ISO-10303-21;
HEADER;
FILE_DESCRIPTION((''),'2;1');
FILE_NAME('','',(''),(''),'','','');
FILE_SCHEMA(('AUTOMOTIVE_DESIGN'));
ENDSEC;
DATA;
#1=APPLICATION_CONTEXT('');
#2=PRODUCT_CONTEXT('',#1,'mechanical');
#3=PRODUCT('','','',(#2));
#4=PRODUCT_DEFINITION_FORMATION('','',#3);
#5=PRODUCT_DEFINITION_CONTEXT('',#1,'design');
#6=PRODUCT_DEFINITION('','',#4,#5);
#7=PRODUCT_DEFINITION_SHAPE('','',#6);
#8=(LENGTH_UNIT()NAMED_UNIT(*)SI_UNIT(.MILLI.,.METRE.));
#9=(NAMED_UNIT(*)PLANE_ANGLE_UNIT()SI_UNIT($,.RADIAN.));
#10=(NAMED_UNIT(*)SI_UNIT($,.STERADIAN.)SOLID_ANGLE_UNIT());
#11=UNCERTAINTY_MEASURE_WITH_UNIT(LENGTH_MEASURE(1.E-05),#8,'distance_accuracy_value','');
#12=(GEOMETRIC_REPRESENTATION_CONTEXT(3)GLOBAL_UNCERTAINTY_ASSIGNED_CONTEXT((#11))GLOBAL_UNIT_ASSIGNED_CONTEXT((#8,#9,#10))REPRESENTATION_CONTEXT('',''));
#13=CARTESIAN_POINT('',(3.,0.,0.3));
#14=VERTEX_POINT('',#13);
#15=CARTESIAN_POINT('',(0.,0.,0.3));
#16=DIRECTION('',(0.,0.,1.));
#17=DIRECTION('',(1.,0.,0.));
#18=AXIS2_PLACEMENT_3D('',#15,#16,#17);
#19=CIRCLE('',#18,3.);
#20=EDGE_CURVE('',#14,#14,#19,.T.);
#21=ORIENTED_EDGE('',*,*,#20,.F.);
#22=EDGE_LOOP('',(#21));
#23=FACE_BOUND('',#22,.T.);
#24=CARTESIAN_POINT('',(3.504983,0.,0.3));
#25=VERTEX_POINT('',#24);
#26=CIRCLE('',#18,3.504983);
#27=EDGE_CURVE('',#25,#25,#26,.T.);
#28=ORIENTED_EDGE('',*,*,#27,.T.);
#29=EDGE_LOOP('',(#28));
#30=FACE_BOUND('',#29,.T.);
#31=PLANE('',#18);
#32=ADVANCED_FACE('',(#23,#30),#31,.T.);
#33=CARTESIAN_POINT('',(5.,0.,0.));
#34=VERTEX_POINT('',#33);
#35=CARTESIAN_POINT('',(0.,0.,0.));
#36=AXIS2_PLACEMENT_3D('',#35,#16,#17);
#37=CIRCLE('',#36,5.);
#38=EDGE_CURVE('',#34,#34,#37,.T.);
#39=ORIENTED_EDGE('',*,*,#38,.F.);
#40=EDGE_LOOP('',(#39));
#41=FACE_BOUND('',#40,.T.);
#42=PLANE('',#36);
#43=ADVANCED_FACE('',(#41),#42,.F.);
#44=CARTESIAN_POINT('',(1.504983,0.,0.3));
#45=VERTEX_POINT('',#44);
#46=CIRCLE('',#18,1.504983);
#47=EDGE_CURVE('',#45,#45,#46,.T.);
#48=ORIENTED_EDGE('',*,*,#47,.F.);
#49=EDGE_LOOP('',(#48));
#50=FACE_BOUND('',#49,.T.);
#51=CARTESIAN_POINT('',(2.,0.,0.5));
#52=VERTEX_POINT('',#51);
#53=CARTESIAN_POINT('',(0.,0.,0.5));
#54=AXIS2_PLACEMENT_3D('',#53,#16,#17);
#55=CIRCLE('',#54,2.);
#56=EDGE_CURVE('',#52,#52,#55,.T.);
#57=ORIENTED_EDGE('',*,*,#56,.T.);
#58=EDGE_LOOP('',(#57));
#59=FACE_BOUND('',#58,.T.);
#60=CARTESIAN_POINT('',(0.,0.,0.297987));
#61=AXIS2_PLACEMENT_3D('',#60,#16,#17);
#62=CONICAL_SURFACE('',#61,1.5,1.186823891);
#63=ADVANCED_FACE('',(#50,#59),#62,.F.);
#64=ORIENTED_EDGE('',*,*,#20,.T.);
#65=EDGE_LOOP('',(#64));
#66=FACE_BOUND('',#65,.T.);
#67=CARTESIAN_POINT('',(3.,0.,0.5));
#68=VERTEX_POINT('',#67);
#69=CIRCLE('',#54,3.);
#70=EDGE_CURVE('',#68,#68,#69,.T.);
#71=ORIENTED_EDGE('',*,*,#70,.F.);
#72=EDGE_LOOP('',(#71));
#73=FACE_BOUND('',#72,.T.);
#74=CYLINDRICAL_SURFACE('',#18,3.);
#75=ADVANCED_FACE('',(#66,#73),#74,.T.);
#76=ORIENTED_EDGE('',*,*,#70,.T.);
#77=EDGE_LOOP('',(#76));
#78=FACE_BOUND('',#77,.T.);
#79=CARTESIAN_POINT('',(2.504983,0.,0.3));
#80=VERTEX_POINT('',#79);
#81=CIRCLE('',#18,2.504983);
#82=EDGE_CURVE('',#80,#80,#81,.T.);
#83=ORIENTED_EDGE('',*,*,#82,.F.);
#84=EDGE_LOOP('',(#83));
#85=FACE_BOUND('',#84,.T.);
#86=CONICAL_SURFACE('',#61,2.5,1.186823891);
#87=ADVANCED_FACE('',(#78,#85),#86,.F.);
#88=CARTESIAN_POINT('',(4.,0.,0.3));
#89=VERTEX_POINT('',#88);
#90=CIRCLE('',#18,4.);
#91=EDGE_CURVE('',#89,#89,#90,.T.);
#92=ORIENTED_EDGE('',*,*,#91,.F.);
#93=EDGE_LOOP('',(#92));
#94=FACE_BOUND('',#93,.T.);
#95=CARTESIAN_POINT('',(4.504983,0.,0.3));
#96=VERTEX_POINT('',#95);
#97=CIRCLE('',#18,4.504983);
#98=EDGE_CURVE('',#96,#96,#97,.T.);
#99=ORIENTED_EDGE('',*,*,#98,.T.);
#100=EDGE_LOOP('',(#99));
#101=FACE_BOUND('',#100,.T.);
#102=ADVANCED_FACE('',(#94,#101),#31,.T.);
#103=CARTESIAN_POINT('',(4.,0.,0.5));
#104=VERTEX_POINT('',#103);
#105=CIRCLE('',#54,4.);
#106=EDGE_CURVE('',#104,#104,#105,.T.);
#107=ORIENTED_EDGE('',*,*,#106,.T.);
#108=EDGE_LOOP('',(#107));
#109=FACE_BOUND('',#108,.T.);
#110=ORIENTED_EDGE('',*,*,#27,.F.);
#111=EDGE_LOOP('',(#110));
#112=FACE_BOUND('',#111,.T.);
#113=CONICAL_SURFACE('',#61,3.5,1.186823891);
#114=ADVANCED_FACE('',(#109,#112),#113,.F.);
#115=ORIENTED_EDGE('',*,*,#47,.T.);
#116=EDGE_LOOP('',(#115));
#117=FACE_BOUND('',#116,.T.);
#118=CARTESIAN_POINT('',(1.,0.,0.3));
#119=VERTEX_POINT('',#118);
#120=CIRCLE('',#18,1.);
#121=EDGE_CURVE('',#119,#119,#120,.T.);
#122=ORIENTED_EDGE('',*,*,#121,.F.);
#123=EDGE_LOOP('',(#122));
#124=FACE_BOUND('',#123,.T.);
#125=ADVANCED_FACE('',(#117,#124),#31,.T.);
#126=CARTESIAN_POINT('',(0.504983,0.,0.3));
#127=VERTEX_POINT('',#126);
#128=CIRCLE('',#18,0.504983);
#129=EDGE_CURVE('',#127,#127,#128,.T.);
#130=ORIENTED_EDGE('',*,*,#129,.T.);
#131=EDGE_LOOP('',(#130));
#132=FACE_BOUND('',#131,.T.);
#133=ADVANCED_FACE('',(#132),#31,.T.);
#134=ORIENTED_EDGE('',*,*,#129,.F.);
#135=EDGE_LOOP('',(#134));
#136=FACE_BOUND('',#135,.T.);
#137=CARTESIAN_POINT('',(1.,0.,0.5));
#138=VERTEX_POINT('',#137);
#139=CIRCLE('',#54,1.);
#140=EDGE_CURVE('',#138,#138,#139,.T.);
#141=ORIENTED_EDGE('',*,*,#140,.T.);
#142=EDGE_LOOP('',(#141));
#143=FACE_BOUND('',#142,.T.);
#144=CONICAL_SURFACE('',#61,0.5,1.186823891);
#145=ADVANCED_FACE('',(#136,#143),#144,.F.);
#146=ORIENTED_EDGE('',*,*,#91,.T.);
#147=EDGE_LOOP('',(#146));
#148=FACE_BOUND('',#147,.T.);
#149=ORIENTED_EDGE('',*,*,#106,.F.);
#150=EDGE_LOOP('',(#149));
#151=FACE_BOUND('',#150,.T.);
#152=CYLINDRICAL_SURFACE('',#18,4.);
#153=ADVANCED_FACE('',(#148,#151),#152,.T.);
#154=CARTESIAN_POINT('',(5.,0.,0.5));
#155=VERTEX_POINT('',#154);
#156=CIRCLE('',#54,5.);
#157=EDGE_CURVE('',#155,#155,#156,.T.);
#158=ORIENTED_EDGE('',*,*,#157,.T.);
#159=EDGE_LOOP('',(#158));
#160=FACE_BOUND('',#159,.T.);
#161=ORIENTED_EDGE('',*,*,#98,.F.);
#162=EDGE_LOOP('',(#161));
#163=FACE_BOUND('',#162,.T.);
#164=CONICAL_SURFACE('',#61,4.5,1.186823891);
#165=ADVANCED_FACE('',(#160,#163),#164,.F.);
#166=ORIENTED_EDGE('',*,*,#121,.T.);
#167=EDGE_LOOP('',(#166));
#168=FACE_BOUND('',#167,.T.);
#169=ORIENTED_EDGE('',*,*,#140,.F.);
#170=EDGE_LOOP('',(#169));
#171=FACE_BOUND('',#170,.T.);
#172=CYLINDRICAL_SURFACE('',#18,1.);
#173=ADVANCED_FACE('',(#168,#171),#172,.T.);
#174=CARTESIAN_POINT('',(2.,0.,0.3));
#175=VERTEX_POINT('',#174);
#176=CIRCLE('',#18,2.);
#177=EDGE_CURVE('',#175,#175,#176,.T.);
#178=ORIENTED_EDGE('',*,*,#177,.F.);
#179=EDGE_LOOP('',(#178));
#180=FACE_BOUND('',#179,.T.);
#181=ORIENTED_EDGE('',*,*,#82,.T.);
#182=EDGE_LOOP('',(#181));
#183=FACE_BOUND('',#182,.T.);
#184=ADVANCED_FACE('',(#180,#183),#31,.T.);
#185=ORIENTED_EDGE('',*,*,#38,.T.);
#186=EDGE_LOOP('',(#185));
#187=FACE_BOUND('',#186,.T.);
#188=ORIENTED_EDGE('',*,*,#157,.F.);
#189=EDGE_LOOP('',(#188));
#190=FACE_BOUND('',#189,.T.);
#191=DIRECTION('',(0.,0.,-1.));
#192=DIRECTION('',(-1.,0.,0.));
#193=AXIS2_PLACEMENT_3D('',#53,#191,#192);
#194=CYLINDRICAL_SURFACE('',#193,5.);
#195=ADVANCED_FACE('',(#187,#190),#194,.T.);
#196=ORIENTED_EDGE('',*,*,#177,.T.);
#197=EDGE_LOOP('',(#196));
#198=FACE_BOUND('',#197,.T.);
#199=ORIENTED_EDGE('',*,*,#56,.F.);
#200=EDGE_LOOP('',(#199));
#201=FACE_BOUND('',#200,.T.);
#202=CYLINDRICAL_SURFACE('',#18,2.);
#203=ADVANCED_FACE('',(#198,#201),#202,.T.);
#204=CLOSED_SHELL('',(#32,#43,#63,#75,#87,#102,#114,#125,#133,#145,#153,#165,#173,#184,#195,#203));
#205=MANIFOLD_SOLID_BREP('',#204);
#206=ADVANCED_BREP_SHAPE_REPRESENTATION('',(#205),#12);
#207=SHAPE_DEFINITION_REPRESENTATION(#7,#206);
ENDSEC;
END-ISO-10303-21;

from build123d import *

# Parameters (mm, degrees)
ESQUISSE1_R             = 5
BOSS_EXTRU_1_DEPTH      = 0.5
ESQUISSE2_R             = 4.5
ESQUISSE2_R_2           = 4
ESQUISSE2_R_3           = 3.5
ESQUISSE2_R_4           = 3
ESQUISSE2_R_5           = 2.5
ESQUISSE2_R_6           = 2
ESQUISSE2_R_7           = 1.5
ESQUISSE2_R_8           = 1
ESQUISSE2_R_9           = 0.5
ENL_V_MAT_EXTRU_2_DEPTH = 0.2
CHANFREIN1_SIZE         = 0.5
CHANFREIN1_SIZE_2       = 0.202013113


with BuildPart() as part:
    # Esquisse1 → Boss.-Extru.1 (new body)
    with BuildSketch(Plane.XY):
        Circle(ESQUISSE1_R)
    extrude(amount=BOSS_EXTRU_1_DEPTH)

    # Esquisse2 → Enlèv. mat.-Extru.2 (cut)
    # profile 1 of 5: a face of its own
    with BuildSketch(Plane.XY.offset(0.5)):
        Circle(ESQUISSE2_R)
        Circle(ESQUISSE2_R_2, mode=Mode.SUBTRACT)
    # profile 2 of 5: a face of its own
    with BuildSketch(Plane.XY.offset(0.5)):
        Circle(ESQUISSE2_R_3)
        Circle(ESQUISSE2_R_4, mode=Mode.SUBTRACT)
    # profile 3 of 5: a face of its own
    with BuildSketch(Plane.XY.offset(0.5)):
        Circle(ESQUISSE2_R_5)
        Circle(ESQUISSE2_R_6, mode=Mode.SUBTRACT)
    # profile 4 of 5: a face of its own
    with BuildSketch(Plane.XY.offset(0.5)):
        Circle(ESQUISSE2_R_7)
        Circle(ESQUISSE2_R_8, mode=Mode.SUBTRACT)
    # profile 5 of 5: a face of its own
    with BuildSketch(Plane.XY.offset(0.5)):
        Circle(ESQUISSE2_R_9)
    extrude(amount=-ENL_V_MAT_EXTRU_2_DEPTH, mode=Mode.SUBTRACT)

    # Chanfrein1
    # the kernel refuses this chamfer: 0.5, 0.202013113 mm, written as the material it takes off along each edge
    with BuildSketch(Plane(origin=(0, 0, 0.5), x_dir=(1, 0, 0), z_dir=(0, -1, 0))) as chanfrein1_piece_1_section:
        Polygon((0.5 + CHANFREIN1_SIZE, 0), (0.5, -CHANFREIN1_SIZE_2), (0.5, 0), align=None)
    chanfrein1_piece_1 = revolve(axis=Axis((0, 0, 0.5), (0, 0, 1)), mode=Mode.PRIVATE)
    chanfrein1_piece_1 = split(chanfrein1_piece_1, bisect_by=Plane(origin=(-0.759410198, 0, 0.3), z_dir=(0, 0, 1)), keep=Keep.TOP, mode=Mode.PRIVATE)
    add(chanfrein1_piece_1, mode=Mode.SUBTRACT)
    with BuildSketch(Plane(origin=(0, 0, 0.5), x_dir=(1, 0, 0), z_dir=(0, -1, 0))) as chanfrein1_piece_2_section:
        Polygon((1.5 + CHANFREIN1_SIZE, 0), (1.5, -CHANFREIN1_SIZE_2), (1.5, 0), align=None)
    chanfrein1_piece_2 = revolve(axis=Axis((0, 0, 0.5), (0, 0, 1)), mode=Mode.PRIVATE)
    chanfrein1_piece_2 = split(chanfrein1_piece_2, bisect_by=Plane(origin=(-1.758573668, 0, 0.3), z_dir=(0, 0, 1)), keep=Keep.TOP, mode=Mode.PRIVATE)
    add(chanfrein1_piece_2, mode=Mode.SUBTRACT)
    with BuildSketch(Plane(origin=(0, 0, 0.5), x_dir=(1, 0, 0), z_dir=(0, -1, 0))) as chanfrein1_piece_3_section:
        Polygon((2.5 + CHANFREIN1_SIZE, 0), (2.5, -CHANFREIN1_SIZE_2), (2.5, 0), align=None)
    chanfrein1_piece_3 = revolve(axis=Axis((0, 0, 0.5), (0, 0, 1)), mode=Mode.PRIVATE)
    chanfrein1_piece_3 = split(chanfrein1_piece_3, bisect_by=Plane(origin=(-2.75803387, 0, 0.3), z_dir=(0, 0, 1)), keep=Keep.TOP, mode=Mode.PRIVATE)
    add(chanfrein1_piece_3, mode=Mode.SUBTRACT)
    with BuildSketch(Plane(origin=(0, 0, 0.5), x_dir=(1, 0, 0), z_dir=(0, -1, 0))) as chanfrein1_piece_4_section:
        Polygon((3.5 + CHANFREIN1_SIZE, 0), (3.5, -CHANFREIN1_SIZE_2), (3.5, 0), align=None)
    chanfrein1_piece_4 = revolve(axis=Axis((0, 0, 0.5), (0, 0, 1)), mode=Mode.PRIVATE)
    chanfrein1_piece_4 = split(chanfrein1_piece_4, bisect_by=Plane(origin=(-3.757616815, 0, 0.3), z_dir=(0, 0, 1)), keep=Keep.TOP, mode=Mode.PRIVATE)
    add(chanfrein1_piece_4, mode=Mode.SUBTRACT)
    with BuildSketch(Plane(origin=(0, 0, 0.5), x_dir=(1, 0, 0), z_dir=(0, -1, 0))) as chanfrein1_piece_5_section:
        Polygon((4.5 + CHANFREIN1_SIZE, 0), (4.5, -CHANFREIN1_SIZE_2), (4.5, 0), align=None)
    chanfrein1_piece_5 = revolve(axis=Axis((0, 0, 0.5), (0, 0, 1)), mode=Mode.PRIVATE)
    chanfrein1_piece_5 = split(chanfrein1_piece_5, bisect_by=Plane(origin=(-4.757270103, 0, 0.3), z_dir=(0, 0, 1)), keep=Keep.TOP, mode=Mode.PRIVATE)
    add(chanfrein1_piece_5, mode=Mode.SUBTRACT)


solid = part.part
